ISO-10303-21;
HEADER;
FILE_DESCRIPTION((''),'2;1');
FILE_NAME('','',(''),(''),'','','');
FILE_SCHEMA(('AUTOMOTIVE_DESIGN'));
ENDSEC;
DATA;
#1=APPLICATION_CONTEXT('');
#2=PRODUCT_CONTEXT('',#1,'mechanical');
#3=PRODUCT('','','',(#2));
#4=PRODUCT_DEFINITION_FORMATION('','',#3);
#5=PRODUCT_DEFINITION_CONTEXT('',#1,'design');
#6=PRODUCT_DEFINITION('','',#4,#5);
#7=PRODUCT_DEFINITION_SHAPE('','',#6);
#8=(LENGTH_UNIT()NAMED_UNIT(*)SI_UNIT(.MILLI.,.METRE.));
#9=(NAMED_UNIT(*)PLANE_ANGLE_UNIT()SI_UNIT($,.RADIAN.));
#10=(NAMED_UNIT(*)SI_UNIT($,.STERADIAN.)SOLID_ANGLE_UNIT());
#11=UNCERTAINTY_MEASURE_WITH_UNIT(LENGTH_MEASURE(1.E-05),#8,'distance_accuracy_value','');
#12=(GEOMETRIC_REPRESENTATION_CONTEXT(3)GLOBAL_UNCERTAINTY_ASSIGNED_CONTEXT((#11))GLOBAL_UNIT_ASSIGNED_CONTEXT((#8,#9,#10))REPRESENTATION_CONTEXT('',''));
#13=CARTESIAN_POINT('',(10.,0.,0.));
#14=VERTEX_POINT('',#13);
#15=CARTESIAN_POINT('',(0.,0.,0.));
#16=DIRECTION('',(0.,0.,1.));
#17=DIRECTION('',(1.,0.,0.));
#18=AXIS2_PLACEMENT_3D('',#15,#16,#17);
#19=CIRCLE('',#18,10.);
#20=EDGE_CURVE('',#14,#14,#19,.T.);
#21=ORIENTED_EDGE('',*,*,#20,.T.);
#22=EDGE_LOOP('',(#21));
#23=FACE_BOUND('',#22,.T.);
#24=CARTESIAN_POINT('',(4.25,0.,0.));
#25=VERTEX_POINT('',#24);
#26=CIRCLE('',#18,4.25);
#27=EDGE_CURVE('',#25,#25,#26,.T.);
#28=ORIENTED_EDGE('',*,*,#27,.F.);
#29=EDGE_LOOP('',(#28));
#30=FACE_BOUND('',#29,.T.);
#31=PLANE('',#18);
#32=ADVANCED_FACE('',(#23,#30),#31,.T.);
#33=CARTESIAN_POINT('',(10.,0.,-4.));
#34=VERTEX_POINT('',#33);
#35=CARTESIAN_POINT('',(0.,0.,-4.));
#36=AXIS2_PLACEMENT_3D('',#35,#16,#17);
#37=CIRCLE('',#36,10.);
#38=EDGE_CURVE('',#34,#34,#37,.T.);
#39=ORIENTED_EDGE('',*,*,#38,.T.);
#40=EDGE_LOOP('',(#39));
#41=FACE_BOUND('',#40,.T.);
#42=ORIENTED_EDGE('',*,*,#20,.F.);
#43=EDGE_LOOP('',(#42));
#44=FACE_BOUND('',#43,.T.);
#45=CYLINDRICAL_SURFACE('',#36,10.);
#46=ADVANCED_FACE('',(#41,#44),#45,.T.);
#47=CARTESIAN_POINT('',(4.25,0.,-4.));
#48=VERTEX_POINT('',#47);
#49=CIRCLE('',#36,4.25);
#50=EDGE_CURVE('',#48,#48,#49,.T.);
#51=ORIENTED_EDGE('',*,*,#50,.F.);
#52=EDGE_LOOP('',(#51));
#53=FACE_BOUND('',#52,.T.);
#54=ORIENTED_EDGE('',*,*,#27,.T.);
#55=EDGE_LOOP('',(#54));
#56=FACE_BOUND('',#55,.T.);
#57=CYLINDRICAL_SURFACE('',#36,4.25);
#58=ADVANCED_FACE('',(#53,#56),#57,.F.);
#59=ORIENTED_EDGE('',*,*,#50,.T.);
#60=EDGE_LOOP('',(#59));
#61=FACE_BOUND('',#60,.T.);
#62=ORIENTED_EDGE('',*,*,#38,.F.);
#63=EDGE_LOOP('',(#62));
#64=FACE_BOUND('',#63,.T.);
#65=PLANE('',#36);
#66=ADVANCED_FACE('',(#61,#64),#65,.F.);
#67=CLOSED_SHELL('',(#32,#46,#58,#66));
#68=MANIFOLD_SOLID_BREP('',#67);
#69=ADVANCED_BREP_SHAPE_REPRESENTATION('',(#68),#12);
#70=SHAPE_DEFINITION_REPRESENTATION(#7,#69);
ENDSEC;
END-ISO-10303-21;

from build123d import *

# Parameters (mm, degrees)
IZIM1_R            = 10
IZIM1_R_2          = 4.25
TABAN_FLAN_1_DEPTH = 4


# Sheet-metal steps are written as plain solids
with BuildPart() as part:
    # Çizim1 → Taban-Flanş1 (new body)
    with BuildSketch(Plane.XY):
        Circle(IZIM1_R)
        Circle(IZIM1_R_2, mode=Mode.SUBTRACT)
    extrude(amount=-TABAN_FLAN_1_DEPTH)


solid = part.part
